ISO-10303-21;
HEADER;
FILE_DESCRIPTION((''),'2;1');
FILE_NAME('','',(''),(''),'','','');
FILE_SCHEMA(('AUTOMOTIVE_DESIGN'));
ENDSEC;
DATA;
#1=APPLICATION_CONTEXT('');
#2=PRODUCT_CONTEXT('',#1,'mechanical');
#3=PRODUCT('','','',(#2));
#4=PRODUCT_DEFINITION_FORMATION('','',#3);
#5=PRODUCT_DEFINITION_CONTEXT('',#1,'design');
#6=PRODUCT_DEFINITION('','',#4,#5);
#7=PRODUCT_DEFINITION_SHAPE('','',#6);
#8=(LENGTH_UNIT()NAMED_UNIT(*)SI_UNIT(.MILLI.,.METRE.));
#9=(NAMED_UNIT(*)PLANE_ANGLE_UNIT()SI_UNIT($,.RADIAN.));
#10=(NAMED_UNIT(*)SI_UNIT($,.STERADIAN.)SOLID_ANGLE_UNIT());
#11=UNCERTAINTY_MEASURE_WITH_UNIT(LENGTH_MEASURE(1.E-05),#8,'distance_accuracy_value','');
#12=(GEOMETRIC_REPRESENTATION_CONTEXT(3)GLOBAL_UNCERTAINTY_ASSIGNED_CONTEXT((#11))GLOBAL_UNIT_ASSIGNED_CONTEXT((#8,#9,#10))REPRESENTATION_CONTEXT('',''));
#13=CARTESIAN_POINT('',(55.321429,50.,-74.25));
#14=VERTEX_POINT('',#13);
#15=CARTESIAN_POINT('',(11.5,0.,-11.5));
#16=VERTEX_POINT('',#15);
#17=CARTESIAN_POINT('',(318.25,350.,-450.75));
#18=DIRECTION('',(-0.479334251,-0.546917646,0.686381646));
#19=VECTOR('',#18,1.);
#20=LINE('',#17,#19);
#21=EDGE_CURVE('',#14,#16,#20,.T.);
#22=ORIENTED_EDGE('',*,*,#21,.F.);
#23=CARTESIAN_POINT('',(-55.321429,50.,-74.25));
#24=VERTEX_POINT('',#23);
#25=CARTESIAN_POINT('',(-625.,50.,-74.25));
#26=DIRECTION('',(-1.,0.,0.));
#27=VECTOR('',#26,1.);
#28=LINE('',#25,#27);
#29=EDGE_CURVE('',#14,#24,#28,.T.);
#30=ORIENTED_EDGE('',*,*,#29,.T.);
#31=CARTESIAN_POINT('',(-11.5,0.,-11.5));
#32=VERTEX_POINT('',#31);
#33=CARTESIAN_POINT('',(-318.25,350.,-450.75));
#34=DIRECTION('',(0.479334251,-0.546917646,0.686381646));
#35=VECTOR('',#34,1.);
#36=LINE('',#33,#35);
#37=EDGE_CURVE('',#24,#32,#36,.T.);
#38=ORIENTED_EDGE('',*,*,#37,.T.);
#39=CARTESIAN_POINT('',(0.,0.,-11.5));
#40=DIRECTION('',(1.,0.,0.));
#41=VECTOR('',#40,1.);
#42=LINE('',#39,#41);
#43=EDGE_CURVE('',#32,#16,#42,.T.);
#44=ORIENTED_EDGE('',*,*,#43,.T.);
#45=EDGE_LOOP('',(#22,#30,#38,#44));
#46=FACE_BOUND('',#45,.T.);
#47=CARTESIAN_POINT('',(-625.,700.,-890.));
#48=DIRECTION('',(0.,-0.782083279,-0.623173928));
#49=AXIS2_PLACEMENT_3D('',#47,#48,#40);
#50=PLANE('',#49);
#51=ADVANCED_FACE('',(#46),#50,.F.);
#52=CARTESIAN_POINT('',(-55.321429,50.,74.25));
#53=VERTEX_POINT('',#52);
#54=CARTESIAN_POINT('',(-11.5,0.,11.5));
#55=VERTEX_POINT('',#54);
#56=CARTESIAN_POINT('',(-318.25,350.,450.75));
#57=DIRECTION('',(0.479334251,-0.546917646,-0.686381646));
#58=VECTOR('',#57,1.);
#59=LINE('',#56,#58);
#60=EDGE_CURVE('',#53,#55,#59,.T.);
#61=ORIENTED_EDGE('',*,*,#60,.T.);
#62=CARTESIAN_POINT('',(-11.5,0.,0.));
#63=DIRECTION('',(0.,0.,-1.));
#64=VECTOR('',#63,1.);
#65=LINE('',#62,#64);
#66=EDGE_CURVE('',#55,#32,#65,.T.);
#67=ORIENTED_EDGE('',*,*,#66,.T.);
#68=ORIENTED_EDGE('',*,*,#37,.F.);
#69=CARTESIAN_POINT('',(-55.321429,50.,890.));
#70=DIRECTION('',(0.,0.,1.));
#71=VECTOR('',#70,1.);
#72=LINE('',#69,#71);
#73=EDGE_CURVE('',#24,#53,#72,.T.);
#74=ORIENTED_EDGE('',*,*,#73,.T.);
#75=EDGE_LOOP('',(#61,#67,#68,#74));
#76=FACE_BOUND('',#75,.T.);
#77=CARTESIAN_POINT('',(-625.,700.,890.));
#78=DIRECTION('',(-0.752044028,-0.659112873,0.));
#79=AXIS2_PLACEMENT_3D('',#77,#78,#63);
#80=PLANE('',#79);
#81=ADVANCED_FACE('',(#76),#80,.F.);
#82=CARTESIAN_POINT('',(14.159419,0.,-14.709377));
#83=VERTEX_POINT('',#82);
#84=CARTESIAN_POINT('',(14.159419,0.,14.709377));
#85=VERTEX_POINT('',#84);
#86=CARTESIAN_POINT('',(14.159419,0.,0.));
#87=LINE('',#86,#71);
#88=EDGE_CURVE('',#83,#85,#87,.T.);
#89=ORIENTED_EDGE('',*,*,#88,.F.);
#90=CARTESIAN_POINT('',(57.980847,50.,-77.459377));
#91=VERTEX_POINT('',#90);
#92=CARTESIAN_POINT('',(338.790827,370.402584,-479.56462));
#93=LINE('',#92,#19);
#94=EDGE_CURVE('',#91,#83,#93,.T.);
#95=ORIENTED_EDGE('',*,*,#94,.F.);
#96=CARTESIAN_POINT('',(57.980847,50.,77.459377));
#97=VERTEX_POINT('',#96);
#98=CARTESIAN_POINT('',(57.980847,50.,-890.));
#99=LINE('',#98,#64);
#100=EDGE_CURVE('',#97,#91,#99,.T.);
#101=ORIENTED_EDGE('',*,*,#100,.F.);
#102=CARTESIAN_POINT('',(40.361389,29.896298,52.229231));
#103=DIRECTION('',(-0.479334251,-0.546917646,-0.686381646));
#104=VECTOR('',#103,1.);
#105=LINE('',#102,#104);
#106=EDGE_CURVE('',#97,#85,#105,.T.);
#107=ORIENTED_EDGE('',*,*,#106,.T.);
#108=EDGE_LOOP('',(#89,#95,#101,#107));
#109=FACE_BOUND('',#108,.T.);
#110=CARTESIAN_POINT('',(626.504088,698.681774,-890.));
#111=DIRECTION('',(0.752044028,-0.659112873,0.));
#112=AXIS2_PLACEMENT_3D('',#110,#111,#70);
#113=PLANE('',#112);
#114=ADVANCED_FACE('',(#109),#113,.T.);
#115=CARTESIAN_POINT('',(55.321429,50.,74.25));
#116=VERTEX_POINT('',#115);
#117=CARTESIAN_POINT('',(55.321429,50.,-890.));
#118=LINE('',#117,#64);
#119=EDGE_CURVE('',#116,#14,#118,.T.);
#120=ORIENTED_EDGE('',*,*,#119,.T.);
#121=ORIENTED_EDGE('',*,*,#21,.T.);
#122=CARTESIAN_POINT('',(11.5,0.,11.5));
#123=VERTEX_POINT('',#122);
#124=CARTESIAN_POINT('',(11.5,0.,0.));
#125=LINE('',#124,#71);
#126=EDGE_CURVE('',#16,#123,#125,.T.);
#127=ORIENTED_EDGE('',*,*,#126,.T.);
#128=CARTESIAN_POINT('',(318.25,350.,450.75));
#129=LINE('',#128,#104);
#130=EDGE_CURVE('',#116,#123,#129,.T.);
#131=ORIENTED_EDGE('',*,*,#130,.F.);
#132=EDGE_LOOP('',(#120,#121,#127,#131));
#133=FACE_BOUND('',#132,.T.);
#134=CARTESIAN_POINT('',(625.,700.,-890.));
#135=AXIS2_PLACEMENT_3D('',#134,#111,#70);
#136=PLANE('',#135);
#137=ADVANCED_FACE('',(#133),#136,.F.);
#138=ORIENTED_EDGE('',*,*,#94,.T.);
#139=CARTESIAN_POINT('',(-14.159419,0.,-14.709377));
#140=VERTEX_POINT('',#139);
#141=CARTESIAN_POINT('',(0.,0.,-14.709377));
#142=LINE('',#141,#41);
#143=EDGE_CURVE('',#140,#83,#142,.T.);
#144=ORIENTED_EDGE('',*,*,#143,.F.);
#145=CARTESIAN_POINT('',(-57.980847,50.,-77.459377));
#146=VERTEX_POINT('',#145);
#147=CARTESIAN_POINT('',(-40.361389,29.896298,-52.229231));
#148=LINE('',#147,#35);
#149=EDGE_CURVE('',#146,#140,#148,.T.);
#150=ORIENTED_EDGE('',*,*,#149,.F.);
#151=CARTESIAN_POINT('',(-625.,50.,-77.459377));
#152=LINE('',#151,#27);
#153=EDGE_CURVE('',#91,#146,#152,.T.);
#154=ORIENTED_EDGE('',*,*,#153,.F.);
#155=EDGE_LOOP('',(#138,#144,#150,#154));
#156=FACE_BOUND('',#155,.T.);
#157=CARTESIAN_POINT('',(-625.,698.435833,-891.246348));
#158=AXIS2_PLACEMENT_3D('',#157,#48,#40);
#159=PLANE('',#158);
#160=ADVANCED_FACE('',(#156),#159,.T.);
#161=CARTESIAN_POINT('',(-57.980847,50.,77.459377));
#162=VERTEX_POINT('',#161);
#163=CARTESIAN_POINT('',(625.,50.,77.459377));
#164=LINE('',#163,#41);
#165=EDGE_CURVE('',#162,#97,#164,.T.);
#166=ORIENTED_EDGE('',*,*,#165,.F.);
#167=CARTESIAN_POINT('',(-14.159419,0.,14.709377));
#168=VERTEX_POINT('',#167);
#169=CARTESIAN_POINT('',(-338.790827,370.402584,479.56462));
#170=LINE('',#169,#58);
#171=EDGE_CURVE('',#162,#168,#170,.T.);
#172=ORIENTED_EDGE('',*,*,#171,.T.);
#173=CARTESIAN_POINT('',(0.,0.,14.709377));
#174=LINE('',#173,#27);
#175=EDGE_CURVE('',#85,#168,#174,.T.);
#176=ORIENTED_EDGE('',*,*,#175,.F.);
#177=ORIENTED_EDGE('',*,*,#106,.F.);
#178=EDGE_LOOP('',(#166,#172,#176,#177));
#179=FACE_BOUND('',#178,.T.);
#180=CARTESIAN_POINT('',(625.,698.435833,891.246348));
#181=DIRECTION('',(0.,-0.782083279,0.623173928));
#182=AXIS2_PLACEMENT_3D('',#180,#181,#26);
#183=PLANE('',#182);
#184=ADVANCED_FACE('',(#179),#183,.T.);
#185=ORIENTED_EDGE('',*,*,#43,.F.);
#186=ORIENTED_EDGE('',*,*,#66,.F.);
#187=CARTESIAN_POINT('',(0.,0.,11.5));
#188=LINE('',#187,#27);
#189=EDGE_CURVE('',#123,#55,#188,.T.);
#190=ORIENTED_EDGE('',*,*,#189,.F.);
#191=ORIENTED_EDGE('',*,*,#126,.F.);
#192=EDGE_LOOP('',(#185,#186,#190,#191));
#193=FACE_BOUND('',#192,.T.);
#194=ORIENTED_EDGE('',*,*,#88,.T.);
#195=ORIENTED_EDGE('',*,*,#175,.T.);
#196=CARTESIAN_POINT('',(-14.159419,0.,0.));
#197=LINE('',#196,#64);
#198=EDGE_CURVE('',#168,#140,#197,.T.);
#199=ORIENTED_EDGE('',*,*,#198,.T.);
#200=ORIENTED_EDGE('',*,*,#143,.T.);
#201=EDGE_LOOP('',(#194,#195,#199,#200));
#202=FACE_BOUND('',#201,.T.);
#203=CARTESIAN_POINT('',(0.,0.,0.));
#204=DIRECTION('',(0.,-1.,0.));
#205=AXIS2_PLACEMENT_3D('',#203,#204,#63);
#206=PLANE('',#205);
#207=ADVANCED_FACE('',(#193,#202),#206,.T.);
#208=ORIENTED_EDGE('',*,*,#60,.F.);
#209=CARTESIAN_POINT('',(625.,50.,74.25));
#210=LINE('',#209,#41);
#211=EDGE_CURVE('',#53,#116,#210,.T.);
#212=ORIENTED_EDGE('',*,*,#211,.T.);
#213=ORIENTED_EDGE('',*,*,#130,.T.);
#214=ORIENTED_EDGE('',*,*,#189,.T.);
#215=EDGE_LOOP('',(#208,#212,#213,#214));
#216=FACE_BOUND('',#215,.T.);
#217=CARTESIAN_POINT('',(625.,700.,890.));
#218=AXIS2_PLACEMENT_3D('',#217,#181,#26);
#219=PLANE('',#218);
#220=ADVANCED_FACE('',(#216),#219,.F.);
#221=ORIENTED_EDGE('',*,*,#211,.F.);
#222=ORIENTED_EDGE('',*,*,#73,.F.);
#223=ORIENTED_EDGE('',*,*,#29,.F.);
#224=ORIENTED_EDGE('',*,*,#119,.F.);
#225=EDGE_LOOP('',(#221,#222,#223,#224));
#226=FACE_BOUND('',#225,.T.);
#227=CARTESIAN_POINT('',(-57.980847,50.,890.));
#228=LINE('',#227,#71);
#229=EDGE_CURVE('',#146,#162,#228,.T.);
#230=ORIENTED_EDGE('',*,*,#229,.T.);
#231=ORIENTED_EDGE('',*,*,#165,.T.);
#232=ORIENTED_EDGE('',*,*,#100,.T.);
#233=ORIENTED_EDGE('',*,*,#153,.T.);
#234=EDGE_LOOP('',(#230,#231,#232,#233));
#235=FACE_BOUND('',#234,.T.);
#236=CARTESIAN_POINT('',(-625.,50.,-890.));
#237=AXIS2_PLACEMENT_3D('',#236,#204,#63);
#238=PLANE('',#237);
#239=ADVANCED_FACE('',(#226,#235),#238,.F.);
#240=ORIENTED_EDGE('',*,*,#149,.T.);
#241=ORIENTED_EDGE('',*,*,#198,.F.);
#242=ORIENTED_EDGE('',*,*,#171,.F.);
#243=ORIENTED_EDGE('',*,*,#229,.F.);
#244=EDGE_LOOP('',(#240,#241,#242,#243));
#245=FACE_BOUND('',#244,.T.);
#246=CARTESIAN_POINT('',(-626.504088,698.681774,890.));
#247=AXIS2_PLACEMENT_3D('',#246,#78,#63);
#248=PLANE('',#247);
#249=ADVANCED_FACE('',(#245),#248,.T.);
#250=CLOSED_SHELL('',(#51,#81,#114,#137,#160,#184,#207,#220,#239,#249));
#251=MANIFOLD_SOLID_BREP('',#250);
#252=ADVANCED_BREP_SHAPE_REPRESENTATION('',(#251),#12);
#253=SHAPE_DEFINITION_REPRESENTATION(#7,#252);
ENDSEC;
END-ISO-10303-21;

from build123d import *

# Parameters (mm, degrees)
CUT_EXTRUDE1_DEPTH      = 1294.338702909
CUT_EXTRUDE1_DEPTH_BACK = 1294.338702909
SKETCH3_W               = 1780
SKETCH3_H               = 650
SHELL1_T                = 2


with BuildPart() as part:
    # Boundary1: read off the stored shape, not the designer's step
    # Boundary1: loft between two sections, ruled curve by curve
    boundary1_from = [
        Edge.make_line((625, 700, -890), (625, 700, 890)),
        Edge.make_line((625, 700, 890), (-625, 700, 890)),
        Edge.make_line((-625, 700, 890), (-625, 700, -890)),
        Edge.make_line((-625, 700, -890), (625, 700, -890)),
    ]
    boundary1_to = [
        Edge.make_line((11.5, 0, -11.5), (11.5, 0, 11.5)),
        Edge.make_line((11.5, 0, 11.5), (-11.5, 0, 11.5)),
        Edge.make_line((-11.5, 0, 11.5), (-11.5, 0, -11.5)),
        Edge.make_line((-11.5, 0, -11.5), (11.5, 0, -11.5)),
    ]
    boundary1 = Solid(Shell([*[Face.make_surface_from_curves(boundary1_from[k], boundary1_to[k]) for k in range(4)], Face(Wire(boundary1_from)), Face(Wire(boundary1_to))]))
    add(boundary1)

    # Sketch3 → Cut-Extrude1 (cut, two sides: drawn at the far end of the back side and taken through both)
    with BuildSketch(Plane(origin=(0, 0, 0), x_dir=(0, 0, -1), z_dir=(1, 0, 0)).offset(-CUT_EXTRUDE1_DEPTH_BACK)):
        with Locations((0, 375)):
            Rectangle(SKETCH3_W, SKETCH3_H)
    extrude(amount=CUT_EXTRUDE1_DEPTH + CUT_EXTRUDE1_DEPTH_BACK, mode=Mode.SUBTRACT)

    # Shell1
    shell1_openings = [part.faces().sort_by_distance(p)[0] for p in [
        (0, 0, 0),
        (0, 50, 0),
    ]]
    offset(amount=SHELL1_T, openings=shell1_openings, kind=Kind.INTERSECTION)


solid = part.part
